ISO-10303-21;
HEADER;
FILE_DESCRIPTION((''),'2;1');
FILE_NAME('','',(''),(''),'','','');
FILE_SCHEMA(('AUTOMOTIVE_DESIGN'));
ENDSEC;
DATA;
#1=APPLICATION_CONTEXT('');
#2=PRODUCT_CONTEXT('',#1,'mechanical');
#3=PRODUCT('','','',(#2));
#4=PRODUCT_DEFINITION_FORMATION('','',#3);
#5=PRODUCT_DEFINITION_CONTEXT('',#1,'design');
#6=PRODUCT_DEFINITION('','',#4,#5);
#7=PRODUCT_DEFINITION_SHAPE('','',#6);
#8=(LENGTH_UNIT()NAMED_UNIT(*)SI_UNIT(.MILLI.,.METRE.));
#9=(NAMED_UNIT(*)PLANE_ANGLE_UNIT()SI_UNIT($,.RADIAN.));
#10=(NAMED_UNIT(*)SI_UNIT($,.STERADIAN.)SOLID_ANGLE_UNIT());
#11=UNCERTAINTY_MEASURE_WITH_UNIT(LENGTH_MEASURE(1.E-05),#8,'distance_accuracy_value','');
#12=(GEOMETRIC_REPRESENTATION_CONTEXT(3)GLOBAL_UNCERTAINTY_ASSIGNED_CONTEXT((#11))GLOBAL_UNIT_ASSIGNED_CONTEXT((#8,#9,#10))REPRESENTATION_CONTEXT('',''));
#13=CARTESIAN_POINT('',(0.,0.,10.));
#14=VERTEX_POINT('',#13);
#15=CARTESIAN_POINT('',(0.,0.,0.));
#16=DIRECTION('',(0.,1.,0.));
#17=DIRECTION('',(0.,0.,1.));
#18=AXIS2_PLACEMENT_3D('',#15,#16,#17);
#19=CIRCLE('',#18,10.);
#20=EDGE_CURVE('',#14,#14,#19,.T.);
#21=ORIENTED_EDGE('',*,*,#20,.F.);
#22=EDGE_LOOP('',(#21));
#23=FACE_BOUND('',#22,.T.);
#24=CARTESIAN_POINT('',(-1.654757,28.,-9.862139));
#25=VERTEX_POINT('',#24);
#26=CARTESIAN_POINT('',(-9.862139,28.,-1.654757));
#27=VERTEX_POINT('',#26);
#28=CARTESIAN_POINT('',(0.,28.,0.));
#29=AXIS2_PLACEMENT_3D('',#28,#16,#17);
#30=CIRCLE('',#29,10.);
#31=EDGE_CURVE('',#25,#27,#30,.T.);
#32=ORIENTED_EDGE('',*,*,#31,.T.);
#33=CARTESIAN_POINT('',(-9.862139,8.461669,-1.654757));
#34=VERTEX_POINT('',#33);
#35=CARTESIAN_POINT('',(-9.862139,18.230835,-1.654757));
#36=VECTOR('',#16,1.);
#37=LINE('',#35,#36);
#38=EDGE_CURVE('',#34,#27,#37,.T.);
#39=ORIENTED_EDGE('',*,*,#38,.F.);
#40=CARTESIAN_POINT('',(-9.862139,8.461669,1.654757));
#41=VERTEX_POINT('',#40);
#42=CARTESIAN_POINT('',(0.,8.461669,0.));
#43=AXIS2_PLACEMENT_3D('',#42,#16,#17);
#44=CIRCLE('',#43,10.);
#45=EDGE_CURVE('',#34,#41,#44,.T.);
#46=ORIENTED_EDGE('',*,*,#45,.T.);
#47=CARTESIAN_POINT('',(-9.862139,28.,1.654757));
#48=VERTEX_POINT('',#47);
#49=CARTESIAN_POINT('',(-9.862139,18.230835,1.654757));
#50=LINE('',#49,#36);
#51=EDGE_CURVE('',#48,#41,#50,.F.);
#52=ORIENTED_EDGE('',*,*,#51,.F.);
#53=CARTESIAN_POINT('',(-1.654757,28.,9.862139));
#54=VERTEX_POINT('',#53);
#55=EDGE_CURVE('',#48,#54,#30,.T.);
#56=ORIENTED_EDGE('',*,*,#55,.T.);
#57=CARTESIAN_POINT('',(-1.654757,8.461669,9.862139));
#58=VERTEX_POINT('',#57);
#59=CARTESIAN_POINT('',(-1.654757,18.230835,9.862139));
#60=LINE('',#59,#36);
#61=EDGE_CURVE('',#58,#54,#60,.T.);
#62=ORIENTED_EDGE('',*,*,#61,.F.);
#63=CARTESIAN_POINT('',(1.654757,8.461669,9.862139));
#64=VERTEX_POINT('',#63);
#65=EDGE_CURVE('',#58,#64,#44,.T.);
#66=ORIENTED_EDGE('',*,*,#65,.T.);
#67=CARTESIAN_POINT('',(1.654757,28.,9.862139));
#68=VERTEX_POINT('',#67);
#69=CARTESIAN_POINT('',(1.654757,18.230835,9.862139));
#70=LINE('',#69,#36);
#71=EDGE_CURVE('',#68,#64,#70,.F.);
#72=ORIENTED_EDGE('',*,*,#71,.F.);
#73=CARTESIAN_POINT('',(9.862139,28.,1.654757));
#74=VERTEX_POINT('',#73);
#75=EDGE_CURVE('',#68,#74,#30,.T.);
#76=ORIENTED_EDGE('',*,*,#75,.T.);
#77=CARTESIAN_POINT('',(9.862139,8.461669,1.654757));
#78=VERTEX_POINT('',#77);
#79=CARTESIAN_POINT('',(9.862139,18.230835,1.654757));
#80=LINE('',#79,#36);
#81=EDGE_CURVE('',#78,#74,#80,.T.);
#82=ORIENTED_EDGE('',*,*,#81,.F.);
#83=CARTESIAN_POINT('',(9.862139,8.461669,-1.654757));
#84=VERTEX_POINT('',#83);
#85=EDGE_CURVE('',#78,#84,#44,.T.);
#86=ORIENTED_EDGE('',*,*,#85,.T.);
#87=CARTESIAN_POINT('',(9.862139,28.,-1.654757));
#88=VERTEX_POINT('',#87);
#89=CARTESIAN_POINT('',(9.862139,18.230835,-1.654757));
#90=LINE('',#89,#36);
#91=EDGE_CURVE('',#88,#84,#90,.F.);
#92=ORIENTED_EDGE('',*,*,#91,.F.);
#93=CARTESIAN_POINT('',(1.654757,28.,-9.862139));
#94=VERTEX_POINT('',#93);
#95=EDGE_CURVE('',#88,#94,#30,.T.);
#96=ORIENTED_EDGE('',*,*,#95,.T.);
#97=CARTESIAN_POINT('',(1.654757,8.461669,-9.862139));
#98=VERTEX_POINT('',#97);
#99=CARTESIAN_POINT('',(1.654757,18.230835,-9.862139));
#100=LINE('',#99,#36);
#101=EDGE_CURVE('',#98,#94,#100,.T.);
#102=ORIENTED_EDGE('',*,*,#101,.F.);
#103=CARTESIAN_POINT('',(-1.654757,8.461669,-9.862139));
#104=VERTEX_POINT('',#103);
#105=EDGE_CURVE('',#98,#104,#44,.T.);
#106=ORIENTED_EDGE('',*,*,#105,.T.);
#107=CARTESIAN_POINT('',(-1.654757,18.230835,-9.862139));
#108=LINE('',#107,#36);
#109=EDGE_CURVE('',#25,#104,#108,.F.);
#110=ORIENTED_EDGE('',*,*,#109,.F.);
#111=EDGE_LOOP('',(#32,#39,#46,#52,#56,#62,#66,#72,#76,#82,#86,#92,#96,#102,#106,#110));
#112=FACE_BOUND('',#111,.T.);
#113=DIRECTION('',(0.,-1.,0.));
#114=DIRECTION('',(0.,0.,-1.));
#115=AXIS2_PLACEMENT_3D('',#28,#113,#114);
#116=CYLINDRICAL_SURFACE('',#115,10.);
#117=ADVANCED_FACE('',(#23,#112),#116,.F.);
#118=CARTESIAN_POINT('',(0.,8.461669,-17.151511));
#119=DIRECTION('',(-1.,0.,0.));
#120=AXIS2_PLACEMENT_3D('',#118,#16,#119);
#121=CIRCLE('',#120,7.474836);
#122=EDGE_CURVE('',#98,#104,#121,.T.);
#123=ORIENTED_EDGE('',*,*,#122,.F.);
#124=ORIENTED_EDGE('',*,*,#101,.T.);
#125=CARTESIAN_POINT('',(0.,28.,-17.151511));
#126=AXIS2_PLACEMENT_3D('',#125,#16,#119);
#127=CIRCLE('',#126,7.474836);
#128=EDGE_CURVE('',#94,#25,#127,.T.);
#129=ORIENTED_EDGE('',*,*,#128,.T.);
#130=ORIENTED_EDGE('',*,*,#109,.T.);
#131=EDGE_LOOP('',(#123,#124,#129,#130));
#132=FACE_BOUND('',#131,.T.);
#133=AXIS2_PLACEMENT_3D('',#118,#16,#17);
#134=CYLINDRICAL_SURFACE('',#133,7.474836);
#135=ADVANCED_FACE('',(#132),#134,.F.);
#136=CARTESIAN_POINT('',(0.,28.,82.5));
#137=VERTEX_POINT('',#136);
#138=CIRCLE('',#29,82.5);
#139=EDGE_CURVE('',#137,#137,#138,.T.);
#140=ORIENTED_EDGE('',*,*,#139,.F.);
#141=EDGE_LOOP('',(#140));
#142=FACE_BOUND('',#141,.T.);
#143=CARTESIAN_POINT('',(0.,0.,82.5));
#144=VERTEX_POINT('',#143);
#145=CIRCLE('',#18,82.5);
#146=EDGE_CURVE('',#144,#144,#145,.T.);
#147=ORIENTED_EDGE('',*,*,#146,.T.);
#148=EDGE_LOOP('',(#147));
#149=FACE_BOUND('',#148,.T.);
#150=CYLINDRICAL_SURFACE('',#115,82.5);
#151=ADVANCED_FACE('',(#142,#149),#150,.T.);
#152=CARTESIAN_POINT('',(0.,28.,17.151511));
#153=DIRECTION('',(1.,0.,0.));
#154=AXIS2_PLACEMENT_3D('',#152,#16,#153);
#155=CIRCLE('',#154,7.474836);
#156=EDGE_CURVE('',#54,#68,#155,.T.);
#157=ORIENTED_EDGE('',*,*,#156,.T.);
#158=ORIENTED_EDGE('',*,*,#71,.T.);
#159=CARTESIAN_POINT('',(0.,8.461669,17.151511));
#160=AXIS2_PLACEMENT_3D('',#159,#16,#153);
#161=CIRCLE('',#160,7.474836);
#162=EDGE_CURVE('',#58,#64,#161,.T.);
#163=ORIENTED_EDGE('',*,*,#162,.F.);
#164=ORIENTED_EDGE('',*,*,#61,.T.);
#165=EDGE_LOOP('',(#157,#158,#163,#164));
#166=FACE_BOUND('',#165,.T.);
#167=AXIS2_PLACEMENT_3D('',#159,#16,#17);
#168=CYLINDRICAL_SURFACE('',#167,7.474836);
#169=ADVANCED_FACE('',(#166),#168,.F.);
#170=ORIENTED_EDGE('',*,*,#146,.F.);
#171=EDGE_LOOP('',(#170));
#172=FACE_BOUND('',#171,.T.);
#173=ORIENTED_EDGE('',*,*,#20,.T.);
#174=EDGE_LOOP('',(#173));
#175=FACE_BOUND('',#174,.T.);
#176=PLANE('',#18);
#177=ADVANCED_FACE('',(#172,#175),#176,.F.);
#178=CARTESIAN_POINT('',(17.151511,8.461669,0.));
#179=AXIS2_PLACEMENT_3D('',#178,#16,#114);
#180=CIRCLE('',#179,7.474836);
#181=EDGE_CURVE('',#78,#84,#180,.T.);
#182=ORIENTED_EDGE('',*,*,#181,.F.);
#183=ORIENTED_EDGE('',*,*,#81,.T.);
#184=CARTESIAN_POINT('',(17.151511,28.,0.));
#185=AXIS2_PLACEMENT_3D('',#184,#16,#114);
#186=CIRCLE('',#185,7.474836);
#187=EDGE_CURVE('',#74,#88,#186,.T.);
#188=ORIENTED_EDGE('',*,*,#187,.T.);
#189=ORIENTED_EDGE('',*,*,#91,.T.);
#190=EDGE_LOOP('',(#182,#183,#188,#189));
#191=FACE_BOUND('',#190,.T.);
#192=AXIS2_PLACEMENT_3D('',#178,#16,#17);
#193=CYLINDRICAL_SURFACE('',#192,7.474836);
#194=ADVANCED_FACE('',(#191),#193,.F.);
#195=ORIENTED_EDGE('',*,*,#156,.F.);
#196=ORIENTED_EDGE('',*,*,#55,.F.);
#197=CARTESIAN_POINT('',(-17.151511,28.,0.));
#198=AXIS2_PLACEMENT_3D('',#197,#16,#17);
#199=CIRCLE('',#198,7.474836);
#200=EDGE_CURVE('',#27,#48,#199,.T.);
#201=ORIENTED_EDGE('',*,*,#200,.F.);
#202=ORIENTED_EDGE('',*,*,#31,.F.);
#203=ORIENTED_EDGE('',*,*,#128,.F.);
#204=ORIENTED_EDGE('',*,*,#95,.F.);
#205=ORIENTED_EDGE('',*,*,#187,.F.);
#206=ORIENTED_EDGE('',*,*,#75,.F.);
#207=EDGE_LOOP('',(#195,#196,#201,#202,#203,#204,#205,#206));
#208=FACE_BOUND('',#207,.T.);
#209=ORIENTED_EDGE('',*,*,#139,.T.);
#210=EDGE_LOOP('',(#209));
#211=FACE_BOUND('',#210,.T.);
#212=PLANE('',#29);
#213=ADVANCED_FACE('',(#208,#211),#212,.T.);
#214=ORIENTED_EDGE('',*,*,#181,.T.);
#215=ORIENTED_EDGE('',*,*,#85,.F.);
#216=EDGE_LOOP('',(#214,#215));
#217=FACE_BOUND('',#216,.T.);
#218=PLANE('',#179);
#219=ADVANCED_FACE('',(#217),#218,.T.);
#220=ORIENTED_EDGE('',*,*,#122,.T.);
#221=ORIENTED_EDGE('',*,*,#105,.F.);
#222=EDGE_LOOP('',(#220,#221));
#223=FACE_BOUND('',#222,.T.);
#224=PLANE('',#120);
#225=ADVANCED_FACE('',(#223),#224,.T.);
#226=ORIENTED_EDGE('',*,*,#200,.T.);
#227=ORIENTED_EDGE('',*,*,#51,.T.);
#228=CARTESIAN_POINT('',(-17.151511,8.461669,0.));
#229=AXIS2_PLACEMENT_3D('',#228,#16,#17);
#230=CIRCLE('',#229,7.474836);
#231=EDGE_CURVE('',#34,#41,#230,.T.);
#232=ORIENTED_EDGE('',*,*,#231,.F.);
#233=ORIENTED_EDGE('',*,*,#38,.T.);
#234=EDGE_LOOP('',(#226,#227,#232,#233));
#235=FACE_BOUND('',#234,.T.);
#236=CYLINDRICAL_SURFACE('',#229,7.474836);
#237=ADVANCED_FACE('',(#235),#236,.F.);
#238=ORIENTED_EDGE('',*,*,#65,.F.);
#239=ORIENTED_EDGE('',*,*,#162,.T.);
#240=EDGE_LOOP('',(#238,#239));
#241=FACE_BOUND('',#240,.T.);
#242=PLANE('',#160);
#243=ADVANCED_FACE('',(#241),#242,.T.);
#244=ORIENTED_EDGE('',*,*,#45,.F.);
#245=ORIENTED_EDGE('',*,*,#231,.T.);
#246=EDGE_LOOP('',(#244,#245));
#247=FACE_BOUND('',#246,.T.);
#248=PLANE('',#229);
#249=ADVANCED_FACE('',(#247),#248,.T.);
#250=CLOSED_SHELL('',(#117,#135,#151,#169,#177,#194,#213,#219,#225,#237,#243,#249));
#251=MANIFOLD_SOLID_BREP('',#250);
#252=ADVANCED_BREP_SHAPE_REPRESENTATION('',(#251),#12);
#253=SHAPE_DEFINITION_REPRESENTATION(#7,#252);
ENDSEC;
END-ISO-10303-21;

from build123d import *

# Parameters (mm, degrees)
SKETCH1_R           = 82.5
BOSS_EXTRUDE1_DEPTH = 28
SKETCH2_R           = 10
CUT_EXTRUDE1_DEPTH  = 120.98541578
SKETCH3_R           = 7.474835821
CUT_EXTRUDE2_DEPTH  = 19.538330678
CIRPATTERN1_COUNT   = 4


with BuildPart() as part:
    # Sketch1 → Boss-Extrude1 (new body)
    with BuildSketch(Plane(origin=(0, 0, 0), x_dir=(1, 0, 0), z_dir=(0, 1, 0))):
        Circle(SKETCH1_R)
    extrude(amount=BOSS_EXTRUDE1_DEPTH)

    # Sketch2 → Cut-Extrude1 (cut, through all)
    with BuildSketch(Plane(origin=(0, 0, 0), x_dir=(1, 0, 0), z_dir=(0, 1, 0))):
        Circle(SKETCH2_R)
    extrude(amount=CUT_EXTRUDE1_DEPTH, mode=Mode.SUBTRACT)

    # Sketch3 → Cut-Extrude2 (cut)
    with BuildSketch(Plane(origin=(0, 28, 0), x_dir=(1, 0, 0), z_dir=(0, 1, 0))):
        with Locations((-17.151511033, 0)):
            Circle(SKETCH3_R)
    cut_extrude2 = extrude(amount=-CUT_EXTRUDE2_DEPTH, mode=Mode.SUBTRACT)

    # CirPattern1: Cut-Extrude2 ×4 about axis
    cirpattern1_axis = Axis((0, 0, 0), (0, 1, 0))
    for i in range(1, CIRPATTERN1_COUNT):
        add(cut_extrude2.rotate(cirpattern1_axis, i * 360 / CIRPATTERN1_COUNT), mode=Mode.SUBTRACT)


solid = part.part
